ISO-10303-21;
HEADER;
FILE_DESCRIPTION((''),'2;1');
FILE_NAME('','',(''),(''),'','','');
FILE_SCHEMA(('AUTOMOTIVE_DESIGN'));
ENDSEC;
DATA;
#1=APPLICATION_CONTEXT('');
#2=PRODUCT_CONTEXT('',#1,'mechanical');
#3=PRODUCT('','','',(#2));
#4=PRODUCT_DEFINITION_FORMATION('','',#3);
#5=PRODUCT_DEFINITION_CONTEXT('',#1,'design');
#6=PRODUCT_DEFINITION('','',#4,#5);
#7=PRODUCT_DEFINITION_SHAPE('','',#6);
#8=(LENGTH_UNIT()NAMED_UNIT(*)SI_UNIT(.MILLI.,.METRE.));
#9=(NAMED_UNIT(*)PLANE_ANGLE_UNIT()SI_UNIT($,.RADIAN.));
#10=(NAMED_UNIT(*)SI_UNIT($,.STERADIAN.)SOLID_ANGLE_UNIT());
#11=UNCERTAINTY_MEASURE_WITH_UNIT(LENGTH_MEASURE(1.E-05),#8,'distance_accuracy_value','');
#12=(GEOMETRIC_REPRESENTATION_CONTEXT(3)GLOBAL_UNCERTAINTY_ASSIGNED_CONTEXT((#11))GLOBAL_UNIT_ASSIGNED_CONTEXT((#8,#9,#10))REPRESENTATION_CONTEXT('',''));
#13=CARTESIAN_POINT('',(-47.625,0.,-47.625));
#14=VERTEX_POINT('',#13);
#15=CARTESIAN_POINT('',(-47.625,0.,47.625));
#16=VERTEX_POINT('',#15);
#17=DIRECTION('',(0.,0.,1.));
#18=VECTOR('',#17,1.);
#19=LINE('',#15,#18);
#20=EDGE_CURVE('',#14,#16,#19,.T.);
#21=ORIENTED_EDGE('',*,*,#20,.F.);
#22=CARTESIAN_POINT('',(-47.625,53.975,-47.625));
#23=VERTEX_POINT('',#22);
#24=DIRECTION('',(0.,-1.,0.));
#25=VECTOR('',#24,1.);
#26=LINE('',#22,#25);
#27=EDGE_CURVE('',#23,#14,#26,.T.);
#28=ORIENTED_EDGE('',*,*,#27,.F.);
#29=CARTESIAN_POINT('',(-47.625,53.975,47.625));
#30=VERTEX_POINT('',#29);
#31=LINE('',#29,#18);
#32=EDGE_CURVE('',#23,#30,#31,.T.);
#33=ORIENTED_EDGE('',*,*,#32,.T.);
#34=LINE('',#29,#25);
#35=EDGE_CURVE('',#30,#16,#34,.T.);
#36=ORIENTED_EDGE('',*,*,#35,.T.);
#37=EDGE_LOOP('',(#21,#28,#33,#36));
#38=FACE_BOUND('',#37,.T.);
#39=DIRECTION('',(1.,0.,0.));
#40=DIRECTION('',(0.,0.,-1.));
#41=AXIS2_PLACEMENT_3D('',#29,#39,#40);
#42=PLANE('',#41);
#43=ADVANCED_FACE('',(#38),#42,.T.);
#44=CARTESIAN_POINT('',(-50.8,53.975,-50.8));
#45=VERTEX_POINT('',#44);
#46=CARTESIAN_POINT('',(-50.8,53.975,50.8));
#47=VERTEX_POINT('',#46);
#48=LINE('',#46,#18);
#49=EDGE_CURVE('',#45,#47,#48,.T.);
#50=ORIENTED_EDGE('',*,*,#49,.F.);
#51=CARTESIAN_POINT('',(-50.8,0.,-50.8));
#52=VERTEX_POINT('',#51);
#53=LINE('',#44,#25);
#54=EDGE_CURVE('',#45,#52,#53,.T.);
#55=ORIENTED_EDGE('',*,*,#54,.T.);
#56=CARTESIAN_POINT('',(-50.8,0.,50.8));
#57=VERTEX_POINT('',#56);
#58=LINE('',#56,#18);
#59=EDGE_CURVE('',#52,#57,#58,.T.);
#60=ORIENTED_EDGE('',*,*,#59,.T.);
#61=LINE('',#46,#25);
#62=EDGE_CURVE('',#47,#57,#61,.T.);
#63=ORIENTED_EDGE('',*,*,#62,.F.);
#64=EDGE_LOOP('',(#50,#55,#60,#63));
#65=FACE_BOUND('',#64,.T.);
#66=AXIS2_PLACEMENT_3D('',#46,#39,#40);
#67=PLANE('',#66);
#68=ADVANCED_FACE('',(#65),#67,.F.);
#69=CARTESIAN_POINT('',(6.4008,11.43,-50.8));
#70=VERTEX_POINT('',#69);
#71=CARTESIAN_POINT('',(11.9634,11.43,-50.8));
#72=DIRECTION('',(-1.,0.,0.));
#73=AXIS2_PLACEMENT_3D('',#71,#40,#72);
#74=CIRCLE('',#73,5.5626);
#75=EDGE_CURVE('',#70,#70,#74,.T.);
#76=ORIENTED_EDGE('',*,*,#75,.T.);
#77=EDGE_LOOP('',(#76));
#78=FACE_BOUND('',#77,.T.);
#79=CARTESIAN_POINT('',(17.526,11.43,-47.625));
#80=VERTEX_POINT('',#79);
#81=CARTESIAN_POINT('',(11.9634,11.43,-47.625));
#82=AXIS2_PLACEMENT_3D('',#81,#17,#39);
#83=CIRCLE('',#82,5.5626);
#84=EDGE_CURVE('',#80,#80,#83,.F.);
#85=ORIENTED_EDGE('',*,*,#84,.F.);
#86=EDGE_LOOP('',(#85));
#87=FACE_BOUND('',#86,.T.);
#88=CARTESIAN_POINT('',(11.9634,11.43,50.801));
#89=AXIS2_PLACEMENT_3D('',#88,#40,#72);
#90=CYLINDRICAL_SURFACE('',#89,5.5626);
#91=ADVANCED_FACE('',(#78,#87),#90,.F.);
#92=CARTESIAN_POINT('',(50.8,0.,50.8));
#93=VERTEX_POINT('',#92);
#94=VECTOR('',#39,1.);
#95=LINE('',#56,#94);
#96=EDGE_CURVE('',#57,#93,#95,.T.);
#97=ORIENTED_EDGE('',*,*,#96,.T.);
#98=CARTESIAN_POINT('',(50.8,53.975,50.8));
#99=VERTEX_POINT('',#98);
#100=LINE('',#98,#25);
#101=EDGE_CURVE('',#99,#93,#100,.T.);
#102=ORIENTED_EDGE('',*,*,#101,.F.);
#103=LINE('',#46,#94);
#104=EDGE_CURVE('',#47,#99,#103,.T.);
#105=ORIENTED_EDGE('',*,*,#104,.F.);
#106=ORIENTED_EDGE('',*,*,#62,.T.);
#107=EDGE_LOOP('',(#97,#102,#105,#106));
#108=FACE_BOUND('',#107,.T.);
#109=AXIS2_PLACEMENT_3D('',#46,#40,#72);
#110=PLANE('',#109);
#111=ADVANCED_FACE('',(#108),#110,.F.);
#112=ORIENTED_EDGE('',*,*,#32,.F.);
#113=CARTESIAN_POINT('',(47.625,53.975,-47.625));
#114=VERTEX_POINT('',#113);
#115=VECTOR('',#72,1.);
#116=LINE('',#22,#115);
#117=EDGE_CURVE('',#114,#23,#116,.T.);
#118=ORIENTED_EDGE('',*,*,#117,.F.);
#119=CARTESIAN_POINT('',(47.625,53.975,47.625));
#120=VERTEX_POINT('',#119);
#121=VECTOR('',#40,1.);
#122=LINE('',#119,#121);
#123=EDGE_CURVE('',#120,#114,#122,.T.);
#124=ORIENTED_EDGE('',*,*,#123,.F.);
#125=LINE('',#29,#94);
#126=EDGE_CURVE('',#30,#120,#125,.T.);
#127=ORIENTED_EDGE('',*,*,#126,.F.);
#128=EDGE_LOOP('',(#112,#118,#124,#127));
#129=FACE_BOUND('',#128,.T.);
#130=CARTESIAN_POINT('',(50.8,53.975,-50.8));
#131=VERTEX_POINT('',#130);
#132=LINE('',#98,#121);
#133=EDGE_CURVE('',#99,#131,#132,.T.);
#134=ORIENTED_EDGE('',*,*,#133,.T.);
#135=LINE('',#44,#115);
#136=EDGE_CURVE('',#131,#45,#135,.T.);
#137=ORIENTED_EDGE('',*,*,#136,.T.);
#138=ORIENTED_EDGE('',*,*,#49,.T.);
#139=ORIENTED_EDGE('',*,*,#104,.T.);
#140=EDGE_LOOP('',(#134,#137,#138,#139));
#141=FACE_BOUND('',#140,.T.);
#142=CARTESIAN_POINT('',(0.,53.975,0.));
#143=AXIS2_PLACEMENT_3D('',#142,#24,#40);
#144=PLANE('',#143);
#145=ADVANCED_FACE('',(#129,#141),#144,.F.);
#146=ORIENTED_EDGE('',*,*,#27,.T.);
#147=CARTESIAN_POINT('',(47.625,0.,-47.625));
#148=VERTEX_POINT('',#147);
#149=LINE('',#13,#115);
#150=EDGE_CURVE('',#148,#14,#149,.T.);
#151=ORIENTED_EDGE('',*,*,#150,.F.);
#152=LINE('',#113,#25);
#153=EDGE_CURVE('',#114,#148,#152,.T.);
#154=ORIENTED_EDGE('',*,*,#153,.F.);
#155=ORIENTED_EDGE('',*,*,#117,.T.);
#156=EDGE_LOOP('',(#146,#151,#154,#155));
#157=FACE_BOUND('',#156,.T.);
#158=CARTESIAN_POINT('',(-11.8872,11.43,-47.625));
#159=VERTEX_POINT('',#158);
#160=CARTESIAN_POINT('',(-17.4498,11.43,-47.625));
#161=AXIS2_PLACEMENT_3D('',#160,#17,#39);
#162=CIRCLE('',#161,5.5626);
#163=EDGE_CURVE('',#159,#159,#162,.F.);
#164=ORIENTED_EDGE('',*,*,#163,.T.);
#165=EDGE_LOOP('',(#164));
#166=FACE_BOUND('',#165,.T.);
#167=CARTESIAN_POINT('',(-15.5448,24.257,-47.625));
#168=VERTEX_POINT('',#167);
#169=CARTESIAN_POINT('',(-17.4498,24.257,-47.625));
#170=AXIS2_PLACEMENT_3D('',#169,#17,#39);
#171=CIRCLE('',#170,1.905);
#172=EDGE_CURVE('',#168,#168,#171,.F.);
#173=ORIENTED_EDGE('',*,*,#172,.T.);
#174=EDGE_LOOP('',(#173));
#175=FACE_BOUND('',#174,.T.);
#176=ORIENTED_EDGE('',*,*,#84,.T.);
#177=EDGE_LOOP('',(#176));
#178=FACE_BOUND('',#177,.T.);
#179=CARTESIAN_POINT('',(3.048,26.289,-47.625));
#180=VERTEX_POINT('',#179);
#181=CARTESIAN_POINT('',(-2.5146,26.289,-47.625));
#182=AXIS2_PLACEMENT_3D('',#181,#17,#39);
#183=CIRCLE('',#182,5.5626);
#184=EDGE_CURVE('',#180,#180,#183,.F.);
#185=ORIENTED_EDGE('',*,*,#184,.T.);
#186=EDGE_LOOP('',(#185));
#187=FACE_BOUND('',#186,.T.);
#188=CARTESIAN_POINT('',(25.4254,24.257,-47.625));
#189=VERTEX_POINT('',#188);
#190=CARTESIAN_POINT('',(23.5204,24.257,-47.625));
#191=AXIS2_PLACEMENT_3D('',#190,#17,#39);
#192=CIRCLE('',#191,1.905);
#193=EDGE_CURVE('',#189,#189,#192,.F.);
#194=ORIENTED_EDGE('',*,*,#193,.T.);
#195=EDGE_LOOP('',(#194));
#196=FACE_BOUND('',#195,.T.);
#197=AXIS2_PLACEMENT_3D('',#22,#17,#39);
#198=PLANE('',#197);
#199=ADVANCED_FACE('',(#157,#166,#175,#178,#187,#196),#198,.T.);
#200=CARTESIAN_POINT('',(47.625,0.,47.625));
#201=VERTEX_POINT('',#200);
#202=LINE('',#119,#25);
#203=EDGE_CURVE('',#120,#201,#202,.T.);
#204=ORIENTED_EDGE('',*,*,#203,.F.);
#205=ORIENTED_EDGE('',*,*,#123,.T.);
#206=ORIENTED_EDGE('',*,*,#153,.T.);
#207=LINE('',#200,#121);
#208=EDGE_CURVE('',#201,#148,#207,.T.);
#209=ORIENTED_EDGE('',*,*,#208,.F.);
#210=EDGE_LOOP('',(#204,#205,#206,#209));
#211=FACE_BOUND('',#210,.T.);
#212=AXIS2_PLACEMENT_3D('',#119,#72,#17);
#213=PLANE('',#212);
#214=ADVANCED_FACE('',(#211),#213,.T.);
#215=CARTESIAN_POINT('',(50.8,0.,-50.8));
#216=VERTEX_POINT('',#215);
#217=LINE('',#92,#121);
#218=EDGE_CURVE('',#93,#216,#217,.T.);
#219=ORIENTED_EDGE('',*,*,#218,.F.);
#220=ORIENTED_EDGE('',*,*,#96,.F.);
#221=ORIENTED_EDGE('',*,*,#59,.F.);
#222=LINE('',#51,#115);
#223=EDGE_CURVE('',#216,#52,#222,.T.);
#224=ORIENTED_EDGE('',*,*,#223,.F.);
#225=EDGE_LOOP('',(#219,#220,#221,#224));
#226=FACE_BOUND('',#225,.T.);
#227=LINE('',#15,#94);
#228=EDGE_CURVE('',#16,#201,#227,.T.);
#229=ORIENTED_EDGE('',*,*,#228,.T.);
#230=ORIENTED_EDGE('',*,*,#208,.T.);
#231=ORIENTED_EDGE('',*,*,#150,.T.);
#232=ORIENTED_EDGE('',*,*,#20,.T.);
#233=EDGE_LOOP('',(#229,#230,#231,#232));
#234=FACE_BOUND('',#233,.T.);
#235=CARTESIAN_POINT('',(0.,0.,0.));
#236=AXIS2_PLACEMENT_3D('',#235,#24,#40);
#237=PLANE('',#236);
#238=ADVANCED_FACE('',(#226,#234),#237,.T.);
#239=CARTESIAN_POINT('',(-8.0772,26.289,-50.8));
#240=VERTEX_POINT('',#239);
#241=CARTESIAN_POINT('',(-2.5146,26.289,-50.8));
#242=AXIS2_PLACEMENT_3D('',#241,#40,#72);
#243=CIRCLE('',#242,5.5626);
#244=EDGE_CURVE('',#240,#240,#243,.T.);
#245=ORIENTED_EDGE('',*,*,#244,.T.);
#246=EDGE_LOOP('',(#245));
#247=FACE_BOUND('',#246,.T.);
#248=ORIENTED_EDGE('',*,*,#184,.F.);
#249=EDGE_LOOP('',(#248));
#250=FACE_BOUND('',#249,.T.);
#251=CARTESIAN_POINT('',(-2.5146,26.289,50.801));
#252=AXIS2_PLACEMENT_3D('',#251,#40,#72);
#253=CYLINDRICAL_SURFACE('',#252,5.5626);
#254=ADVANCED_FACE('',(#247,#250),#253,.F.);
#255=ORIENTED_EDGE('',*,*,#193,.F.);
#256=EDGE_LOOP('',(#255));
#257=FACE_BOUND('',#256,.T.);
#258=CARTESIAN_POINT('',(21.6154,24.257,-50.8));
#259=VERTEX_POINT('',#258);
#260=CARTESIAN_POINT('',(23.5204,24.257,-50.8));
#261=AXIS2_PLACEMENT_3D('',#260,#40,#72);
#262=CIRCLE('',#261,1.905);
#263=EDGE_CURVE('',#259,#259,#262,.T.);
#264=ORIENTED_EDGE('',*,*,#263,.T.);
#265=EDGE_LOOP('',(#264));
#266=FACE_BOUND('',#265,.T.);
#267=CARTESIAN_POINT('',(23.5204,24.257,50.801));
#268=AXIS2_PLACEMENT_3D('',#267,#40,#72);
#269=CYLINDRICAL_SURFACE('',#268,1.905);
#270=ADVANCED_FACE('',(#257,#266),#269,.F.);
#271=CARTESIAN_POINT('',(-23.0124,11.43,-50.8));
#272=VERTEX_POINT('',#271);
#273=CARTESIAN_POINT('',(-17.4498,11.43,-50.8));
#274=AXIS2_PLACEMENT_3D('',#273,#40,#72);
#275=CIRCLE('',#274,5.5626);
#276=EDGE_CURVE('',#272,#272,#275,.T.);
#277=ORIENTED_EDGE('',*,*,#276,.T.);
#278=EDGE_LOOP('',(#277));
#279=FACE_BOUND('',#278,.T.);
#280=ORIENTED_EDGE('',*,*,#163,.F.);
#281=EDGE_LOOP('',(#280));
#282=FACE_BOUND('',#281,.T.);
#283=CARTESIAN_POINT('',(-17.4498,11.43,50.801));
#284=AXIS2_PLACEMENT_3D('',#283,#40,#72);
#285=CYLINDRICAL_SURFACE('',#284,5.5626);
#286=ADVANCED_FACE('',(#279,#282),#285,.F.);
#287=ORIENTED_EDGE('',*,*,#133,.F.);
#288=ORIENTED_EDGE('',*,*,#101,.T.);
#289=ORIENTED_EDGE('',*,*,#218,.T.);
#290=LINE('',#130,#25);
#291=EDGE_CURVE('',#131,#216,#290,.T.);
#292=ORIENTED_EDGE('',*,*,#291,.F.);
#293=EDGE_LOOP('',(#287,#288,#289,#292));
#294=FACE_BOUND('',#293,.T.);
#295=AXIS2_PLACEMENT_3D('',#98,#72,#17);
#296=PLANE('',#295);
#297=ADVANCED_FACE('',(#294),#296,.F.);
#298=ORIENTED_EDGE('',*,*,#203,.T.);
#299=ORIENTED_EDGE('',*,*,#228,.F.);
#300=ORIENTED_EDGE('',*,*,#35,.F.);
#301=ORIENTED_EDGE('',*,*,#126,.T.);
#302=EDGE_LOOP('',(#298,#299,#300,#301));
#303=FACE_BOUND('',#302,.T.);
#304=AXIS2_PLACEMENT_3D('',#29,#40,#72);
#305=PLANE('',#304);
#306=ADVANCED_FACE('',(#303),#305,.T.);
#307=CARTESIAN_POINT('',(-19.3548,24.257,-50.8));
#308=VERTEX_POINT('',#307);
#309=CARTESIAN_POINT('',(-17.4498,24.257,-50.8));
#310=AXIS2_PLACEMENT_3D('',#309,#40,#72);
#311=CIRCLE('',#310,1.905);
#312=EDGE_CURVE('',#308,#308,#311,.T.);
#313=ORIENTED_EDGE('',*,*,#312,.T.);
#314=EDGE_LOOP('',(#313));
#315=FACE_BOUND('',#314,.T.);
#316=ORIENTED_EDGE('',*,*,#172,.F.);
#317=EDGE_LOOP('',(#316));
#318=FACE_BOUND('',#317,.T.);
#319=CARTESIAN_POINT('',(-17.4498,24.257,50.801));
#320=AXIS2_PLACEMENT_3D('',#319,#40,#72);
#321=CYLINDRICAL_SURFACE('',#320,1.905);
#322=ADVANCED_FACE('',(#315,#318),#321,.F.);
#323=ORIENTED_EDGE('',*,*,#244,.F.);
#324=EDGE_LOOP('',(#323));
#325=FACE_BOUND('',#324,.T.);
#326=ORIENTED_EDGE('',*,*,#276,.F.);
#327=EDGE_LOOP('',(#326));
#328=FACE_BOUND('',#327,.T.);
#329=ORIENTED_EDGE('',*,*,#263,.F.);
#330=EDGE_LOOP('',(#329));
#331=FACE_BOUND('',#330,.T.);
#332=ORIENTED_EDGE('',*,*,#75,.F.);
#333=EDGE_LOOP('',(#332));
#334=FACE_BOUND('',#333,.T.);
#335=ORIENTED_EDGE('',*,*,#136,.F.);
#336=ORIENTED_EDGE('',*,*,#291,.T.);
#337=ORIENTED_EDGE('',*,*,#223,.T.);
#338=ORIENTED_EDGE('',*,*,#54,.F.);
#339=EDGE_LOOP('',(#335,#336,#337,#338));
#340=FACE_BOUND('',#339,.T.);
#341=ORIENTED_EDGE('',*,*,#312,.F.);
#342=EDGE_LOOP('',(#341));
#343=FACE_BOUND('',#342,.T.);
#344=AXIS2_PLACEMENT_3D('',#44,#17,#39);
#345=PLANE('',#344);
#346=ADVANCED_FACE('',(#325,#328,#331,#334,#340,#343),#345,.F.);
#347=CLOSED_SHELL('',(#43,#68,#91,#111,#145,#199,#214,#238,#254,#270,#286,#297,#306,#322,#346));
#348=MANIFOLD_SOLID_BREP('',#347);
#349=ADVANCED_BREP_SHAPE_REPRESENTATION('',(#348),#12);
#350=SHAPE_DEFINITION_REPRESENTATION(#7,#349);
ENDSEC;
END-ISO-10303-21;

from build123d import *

# Parameters (mm, degrees)
SKETCH1_W                = 101.6
SKETCH1_H                = 101.6
SKETCH1_W_2              = 95.25
SKETCH1_H_2              = 95.25
BOSS_EXTRUDE1_DEPTH      = 53.975
CUT_EXTRUDE2_START       = -50.8
CUT_EXTRUDE2_OUTLINE_R   = 5.5626
CUT_EXTRUDE2_OUTLINE_R_2 = 1.905
CUT_EXTRUDE2_DEPTH       = 3.175


# Read off the part's stored shape, not the designer's step: Cut-Extrude2
with BuildPart() as part:
    # Sketch1 → Boss-Extrude1 (new body)
    with BuildSketch(Plane(origin=(0, 0, 0), x_dir=(1, 0, 0), z_dir=(0, 1, 0))):
        Rectangle(SKETCH1_W, SKETCH1_H)
        Rectangle(SKETCH1_W_2, SKETCH1_H_2, mode=Mode.SUBTRACT)
    extrude(amount=BOSS_EXTRUDE1_DEPTH)

    # Cut-Extrude2 outline → Cut-Extrude2 (cut)
    with BuildSketch(Plane.XY.offset(CUT_EXTRUDE2_START)):
        with Locations((-2.5146, 26.289)):
            Circle(CUT_EXTRUDE2_OUTLINE_R)
        with Locations((23.5204, 24.257)):
            Circle(CUT_EXTRUDE2_OUTLINE_R_2)
        with Locations((11.9634, 11.43)):
            Circle(CUT_EXTRUDE2_OUTLINE_R)
        with Locations((-17.4498, 11.43)):
            Circle(CUT_EXTRUDE2_OUTLINE_R)
        with Locations((-17.4498, 24.257)):
            Circle(CUT_EXTRUDE2_OUTLINE_R_2)
    extrude(amount=CUT_EXTRUDE2_DEPTH, mode=Mode.SUBTRACT)


solid = part.part
